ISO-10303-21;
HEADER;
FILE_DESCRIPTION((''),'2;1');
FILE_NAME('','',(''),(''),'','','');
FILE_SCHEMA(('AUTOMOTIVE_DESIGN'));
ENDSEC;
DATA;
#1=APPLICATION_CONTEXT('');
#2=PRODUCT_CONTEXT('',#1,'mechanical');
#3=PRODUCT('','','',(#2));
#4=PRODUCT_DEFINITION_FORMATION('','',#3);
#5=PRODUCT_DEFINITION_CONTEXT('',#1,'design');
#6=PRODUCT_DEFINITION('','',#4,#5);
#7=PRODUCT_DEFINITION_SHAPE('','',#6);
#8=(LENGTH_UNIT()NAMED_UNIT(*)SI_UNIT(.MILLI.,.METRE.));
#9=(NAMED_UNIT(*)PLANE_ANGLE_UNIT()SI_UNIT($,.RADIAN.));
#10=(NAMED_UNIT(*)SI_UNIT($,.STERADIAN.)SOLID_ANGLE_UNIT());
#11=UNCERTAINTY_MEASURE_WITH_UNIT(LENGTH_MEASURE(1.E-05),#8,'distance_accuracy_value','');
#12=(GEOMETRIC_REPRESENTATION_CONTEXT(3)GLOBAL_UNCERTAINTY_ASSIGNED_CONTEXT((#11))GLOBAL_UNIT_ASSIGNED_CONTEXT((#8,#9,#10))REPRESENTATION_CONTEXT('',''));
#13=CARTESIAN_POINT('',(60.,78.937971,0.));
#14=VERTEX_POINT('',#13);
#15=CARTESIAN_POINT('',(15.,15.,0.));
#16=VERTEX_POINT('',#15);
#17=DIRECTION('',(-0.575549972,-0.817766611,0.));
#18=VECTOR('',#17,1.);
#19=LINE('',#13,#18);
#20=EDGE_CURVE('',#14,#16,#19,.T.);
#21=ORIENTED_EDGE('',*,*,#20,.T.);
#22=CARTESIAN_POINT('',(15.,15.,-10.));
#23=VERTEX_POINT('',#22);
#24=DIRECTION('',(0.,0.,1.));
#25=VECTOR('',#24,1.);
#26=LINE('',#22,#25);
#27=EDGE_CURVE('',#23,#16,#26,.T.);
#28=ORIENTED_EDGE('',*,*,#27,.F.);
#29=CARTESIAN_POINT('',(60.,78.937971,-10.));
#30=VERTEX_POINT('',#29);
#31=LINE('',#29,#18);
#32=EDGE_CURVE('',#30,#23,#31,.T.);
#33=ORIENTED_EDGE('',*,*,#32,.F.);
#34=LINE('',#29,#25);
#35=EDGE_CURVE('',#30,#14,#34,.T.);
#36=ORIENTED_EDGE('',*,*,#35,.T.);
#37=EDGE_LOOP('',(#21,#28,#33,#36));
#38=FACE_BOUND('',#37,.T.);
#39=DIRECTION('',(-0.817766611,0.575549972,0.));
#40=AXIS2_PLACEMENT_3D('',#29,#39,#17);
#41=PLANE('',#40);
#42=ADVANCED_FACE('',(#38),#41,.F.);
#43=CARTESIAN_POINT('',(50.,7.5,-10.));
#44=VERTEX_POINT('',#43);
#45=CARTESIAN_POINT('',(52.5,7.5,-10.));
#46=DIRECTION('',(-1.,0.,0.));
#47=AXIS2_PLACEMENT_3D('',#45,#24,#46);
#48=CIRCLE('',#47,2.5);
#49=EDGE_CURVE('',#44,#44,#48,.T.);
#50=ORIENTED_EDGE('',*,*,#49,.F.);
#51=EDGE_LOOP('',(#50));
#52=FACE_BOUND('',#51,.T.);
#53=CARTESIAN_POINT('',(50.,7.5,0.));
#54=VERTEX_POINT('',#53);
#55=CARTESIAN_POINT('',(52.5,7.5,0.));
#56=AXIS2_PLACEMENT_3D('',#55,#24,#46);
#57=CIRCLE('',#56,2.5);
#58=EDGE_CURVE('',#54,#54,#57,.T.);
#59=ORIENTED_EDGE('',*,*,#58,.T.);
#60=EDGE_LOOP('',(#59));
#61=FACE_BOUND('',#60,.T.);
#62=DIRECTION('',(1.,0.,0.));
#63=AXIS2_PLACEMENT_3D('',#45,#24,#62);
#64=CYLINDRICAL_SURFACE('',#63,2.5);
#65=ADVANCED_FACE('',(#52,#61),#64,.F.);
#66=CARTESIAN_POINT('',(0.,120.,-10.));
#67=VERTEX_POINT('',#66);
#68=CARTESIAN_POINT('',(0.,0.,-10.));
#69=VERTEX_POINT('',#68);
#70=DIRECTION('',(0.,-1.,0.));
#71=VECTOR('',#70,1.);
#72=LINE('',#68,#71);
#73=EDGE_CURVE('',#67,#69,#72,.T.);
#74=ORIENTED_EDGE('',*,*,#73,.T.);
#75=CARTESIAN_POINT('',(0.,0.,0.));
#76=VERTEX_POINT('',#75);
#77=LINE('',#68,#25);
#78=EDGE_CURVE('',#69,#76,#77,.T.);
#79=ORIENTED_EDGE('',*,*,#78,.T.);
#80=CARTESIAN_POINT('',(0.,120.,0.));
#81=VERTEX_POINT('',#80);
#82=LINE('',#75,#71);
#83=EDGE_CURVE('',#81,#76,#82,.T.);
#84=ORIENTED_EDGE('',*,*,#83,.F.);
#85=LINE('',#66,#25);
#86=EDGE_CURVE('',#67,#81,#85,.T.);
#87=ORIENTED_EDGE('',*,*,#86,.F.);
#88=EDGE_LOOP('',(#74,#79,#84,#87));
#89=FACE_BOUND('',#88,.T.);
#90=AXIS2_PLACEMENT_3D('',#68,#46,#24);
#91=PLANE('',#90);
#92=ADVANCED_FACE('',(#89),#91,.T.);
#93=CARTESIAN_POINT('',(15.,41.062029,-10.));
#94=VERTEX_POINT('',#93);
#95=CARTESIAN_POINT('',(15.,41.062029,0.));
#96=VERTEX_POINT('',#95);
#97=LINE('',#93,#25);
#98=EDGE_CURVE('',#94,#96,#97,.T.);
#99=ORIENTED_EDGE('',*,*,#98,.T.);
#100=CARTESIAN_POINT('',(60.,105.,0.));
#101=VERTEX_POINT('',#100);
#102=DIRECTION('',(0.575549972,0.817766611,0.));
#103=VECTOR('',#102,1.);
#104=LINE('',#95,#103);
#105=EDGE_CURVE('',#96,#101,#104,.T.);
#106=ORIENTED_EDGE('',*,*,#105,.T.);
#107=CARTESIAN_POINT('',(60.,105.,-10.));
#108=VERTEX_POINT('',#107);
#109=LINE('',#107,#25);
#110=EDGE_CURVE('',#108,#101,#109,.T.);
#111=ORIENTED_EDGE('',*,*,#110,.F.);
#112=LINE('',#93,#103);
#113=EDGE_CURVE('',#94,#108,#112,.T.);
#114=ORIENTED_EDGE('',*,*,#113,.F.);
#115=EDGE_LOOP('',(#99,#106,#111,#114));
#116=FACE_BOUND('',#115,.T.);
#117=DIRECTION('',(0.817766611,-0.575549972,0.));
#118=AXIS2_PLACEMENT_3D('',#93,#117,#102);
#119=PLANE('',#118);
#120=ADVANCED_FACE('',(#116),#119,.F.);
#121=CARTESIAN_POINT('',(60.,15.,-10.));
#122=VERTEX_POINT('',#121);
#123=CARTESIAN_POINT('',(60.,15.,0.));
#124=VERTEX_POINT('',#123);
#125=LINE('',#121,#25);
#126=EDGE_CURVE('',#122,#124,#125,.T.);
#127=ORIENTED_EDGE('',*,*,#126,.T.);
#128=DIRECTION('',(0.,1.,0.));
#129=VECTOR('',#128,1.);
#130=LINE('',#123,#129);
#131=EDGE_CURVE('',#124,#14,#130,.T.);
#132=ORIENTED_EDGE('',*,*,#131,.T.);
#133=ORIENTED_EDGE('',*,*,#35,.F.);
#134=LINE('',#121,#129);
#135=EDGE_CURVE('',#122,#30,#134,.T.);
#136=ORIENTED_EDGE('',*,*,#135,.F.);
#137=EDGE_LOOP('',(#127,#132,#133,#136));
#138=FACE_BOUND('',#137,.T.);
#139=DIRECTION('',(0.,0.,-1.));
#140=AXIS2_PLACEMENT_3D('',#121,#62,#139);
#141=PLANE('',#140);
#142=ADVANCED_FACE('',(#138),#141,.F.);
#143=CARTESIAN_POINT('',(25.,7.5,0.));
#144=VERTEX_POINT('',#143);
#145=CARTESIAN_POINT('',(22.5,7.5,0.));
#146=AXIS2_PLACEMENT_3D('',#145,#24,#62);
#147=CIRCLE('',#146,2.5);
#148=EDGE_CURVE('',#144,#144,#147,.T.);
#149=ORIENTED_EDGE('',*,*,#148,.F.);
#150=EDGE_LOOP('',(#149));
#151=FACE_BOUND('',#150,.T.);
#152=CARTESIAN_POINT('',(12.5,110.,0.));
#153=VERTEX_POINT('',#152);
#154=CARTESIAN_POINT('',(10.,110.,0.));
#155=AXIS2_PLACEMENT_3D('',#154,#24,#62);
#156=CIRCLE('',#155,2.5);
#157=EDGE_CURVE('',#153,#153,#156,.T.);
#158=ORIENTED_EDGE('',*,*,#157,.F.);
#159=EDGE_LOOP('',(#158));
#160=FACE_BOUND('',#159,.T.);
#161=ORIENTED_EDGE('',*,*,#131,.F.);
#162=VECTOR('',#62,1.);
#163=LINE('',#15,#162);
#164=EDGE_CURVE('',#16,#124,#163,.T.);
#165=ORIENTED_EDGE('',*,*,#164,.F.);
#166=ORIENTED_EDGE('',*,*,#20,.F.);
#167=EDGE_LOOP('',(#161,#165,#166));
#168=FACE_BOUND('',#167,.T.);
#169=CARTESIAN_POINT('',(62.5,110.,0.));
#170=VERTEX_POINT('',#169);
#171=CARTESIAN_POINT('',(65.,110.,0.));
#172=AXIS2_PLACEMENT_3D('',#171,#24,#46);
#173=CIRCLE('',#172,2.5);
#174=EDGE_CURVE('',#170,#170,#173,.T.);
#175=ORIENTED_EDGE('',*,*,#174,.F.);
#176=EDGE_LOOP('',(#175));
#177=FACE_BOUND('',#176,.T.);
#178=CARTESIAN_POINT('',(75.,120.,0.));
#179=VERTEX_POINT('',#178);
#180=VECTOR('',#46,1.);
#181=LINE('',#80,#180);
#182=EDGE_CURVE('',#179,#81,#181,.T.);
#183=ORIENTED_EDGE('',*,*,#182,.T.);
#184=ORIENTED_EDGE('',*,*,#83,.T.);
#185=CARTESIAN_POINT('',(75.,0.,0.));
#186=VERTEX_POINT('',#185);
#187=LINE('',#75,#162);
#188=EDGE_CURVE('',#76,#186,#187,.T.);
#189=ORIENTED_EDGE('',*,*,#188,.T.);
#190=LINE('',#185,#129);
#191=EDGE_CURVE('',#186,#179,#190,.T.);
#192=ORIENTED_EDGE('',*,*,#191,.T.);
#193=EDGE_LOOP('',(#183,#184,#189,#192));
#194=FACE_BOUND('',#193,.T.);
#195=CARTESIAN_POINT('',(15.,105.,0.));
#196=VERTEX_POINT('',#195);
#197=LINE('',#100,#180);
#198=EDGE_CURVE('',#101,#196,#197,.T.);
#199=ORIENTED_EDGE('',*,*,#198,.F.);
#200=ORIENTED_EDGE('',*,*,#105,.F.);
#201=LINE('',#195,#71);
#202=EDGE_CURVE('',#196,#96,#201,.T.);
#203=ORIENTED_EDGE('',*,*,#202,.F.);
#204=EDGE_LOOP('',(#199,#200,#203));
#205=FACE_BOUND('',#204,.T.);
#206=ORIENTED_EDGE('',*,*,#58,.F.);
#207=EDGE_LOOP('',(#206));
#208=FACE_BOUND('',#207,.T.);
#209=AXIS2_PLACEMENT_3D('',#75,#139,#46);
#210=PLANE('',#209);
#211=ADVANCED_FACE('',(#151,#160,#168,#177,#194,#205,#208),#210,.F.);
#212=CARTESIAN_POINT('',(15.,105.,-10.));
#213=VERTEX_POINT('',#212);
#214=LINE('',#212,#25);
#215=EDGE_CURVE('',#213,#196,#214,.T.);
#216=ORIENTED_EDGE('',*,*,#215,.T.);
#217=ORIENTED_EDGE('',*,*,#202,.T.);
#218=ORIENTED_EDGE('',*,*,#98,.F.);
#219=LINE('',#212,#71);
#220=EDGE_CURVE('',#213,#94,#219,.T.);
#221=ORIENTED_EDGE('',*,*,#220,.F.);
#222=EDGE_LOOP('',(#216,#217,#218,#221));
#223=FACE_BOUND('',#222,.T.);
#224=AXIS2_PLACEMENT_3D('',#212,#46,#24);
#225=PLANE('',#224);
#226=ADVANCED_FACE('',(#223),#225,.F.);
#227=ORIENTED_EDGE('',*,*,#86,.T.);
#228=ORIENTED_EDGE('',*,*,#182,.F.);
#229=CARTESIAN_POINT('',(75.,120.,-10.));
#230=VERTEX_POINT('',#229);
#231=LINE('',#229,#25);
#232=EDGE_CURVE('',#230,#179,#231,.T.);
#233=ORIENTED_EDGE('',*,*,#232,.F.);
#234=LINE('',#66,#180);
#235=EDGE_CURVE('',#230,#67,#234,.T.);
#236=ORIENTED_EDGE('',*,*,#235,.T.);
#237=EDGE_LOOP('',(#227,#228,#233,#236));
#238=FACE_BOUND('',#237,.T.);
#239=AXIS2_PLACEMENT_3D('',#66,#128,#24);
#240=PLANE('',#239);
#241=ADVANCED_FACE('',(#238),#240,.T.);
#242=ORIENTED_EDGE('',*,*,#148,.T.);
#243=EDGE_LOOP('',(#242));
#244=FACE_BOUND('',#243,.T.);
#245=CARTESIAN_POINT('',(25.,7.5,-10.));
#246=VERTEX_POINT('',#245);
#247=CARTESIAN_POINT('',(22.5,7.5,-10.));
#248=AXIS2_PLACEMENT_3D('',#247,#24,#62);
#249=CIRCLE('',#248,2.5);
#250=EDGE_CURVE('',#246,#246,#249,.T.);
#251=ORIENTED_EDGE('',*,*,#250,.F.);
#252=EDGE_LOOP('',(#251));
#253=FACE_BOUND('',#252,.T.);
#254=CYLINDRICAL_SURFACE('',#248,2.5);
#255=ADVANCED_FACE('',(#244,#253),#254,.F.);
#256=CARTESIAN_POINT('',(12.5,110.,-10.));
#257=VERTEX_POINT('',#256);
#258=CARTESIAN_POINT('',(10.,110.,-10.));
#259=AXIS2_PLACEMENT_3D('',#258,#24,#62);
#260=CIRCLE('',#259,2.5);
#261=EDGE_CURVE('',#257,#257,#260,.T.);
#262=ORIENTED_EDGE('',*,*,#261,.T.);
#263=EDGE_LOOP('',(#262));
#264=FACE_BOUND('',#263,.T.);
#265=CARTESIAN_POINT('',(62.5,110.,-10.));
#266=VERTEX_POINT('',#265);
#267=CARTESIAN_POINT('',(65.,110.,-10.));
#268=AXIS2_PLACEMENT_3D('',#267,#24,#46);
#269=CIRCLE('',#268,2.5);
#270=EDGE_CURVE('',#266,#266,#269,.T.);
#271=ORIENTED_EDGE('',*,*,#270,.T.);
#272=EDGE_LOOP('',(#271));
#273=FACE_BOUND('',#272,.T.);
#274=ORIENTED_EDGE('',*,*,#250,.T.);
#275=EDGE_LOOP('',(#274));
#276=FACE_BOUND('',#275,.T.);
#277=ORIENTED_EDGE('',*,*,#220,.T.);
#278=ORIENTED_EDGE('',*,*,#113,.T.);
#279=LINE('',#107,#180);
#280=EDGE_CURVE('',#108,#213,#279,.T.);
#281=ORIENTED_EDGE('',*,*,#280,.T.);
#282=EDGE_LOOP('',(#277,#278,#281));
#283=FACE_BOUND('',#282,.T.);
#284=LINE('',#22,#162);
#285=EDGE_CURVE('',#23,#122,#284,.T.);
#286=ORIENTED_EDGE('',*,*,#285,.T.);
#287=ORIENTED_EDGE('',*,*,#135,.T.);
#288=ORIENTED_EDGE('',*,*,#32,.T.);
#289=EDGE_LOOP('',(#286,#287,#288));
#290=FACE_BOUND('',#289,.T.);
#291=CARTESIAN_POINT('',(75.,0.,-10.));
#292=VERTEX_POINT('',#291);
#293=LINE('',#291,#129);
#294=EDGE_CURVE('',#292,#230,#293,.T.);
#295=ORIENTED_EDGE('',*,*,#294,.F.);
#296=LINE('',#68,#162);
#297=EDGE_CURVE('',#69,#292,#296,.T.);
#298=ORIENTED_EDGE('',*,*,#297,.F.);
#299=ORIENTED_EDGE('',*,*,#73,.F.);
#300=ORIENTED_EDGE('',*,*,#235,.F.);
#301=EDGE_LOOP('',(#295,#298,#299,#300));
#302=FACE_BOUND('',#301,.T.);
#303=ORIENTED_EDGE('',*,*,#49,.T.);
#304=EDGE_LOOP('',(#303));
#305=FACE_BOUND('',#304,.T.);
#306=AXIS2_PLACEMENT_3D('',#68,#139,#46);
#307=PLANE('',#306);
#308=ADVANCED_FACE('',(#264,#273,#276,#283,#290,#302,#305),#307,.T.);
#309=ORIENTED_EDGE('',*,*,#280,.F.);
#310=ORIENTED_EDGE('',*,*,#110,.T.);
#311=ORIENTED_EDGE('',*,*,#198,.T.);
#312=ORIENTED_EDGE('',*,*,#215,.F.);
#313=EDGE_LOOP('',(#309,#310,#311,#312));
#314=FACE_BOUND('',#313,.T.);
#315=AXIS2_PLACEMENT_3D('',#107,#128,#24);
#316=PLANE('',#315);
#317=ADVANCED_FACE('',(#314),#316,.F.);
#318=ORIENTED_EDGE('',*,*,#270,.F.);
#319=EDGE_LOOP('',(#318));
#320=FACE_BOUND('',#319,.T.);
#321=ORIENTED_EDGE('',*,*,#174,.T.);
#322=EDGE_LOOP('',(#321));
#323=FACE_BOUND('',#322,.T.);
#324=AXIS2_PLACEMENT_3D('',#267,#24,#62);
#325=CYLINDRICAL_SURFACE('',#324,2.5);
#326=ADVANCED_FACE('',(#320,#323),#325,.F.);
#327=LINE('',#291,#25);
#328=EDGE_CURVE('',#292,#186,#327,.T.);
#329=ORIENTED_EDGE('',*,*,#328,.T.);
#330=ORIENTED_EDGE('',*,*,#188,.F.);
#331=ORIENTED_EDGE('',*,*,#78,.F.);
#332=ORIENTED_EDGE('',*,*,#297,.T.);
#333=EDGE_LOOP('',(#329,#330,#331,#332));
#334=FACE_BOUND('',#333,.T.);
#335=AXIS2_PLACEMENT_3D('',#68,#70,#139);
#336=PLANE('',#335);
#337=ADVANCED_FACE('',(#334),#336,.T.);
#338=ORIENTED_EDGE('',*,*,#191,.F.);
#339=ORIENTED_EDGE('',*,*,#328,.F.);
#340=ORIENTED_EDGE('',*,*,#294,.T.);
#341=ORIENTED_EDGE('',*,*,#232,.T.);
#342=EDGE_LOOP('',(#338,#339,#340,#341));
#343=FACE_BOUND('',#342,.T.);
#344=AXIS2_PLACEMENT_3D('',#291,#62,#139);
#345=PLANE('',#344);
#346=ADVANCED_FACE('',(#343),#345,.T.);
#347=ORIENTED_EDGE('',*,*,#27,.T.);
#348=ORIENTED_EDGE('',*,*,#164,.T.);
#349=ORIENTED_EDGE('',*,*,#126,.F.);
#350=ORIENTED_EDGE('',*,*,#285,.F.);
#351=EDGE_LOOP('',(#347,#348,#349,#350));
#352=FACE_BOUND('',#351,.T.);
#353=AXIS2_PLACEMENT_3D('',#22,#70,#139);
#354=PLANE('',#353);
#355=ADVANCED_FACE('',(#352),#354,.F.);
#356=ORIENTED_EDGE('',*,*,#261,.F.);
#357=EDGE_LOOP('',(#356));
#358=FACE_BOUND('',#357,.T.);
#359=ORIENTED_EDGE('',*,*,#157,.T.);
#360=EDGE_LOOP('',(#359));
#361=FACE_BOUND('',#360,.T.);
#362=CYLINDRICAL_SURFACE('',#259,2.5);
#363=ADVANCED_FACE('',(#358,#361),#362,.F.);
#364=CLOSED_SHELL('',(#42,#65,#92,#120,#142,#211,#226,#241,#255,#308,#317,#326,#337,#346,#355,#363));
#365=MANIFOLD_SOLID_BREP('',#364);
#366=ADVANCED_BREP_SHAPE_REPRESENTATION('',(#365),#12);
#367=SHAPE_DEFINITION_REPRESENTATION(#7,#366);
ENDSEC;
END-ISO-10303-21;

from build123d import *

# Parameters (mm, degrees)
SKETCH1_W          = 75
SKETCH1_H          = 120
BASE_FLANGE1_DEPTH = 10
SKETCH7_R          = 2.5
CUT_EXTRUDE1_DEPTH = 10


# Sheet-metal steps are written as plain solids
with BuildPart() as part:
    # Sketch1 → Base-Flange1 (new body)
    with BuildSketch(Plane.XY):
        with Locations((37.5, 60)):
            Rectangle(SKETCH1_W, SKETCH1_H)
    extrude(amount=-BASE_FLANGE1_DEPTH)

    # Sketch7 → Cut-Extrude1 (cut)
    with BuildSketch(Plane.XY):
        with Locations((10, 110)):
            Circle(SKETCH7_R)
        with Locations((22.5, 7.5)):
            Circle(SKETCH7_R)
        with Locations(Location((52.5, 7.5, 0), (0, 0, 180))):
            Circle(SKETCH7_R)
        with Locations(Location((65, 110, 0), (0, 0, 180))):
            Circle(SKETCH7_R)
        Polygon((15, 105), (15, 41.062028891), (60, 105), align=None)
        Polygon((15, 15), (60, 15), (60, 78.937971109), align=None)
    extrude(amount=-CUT_EXTRUDE1_DEPTH, mode=Mode.SUBTRACT)


solid = part.part
